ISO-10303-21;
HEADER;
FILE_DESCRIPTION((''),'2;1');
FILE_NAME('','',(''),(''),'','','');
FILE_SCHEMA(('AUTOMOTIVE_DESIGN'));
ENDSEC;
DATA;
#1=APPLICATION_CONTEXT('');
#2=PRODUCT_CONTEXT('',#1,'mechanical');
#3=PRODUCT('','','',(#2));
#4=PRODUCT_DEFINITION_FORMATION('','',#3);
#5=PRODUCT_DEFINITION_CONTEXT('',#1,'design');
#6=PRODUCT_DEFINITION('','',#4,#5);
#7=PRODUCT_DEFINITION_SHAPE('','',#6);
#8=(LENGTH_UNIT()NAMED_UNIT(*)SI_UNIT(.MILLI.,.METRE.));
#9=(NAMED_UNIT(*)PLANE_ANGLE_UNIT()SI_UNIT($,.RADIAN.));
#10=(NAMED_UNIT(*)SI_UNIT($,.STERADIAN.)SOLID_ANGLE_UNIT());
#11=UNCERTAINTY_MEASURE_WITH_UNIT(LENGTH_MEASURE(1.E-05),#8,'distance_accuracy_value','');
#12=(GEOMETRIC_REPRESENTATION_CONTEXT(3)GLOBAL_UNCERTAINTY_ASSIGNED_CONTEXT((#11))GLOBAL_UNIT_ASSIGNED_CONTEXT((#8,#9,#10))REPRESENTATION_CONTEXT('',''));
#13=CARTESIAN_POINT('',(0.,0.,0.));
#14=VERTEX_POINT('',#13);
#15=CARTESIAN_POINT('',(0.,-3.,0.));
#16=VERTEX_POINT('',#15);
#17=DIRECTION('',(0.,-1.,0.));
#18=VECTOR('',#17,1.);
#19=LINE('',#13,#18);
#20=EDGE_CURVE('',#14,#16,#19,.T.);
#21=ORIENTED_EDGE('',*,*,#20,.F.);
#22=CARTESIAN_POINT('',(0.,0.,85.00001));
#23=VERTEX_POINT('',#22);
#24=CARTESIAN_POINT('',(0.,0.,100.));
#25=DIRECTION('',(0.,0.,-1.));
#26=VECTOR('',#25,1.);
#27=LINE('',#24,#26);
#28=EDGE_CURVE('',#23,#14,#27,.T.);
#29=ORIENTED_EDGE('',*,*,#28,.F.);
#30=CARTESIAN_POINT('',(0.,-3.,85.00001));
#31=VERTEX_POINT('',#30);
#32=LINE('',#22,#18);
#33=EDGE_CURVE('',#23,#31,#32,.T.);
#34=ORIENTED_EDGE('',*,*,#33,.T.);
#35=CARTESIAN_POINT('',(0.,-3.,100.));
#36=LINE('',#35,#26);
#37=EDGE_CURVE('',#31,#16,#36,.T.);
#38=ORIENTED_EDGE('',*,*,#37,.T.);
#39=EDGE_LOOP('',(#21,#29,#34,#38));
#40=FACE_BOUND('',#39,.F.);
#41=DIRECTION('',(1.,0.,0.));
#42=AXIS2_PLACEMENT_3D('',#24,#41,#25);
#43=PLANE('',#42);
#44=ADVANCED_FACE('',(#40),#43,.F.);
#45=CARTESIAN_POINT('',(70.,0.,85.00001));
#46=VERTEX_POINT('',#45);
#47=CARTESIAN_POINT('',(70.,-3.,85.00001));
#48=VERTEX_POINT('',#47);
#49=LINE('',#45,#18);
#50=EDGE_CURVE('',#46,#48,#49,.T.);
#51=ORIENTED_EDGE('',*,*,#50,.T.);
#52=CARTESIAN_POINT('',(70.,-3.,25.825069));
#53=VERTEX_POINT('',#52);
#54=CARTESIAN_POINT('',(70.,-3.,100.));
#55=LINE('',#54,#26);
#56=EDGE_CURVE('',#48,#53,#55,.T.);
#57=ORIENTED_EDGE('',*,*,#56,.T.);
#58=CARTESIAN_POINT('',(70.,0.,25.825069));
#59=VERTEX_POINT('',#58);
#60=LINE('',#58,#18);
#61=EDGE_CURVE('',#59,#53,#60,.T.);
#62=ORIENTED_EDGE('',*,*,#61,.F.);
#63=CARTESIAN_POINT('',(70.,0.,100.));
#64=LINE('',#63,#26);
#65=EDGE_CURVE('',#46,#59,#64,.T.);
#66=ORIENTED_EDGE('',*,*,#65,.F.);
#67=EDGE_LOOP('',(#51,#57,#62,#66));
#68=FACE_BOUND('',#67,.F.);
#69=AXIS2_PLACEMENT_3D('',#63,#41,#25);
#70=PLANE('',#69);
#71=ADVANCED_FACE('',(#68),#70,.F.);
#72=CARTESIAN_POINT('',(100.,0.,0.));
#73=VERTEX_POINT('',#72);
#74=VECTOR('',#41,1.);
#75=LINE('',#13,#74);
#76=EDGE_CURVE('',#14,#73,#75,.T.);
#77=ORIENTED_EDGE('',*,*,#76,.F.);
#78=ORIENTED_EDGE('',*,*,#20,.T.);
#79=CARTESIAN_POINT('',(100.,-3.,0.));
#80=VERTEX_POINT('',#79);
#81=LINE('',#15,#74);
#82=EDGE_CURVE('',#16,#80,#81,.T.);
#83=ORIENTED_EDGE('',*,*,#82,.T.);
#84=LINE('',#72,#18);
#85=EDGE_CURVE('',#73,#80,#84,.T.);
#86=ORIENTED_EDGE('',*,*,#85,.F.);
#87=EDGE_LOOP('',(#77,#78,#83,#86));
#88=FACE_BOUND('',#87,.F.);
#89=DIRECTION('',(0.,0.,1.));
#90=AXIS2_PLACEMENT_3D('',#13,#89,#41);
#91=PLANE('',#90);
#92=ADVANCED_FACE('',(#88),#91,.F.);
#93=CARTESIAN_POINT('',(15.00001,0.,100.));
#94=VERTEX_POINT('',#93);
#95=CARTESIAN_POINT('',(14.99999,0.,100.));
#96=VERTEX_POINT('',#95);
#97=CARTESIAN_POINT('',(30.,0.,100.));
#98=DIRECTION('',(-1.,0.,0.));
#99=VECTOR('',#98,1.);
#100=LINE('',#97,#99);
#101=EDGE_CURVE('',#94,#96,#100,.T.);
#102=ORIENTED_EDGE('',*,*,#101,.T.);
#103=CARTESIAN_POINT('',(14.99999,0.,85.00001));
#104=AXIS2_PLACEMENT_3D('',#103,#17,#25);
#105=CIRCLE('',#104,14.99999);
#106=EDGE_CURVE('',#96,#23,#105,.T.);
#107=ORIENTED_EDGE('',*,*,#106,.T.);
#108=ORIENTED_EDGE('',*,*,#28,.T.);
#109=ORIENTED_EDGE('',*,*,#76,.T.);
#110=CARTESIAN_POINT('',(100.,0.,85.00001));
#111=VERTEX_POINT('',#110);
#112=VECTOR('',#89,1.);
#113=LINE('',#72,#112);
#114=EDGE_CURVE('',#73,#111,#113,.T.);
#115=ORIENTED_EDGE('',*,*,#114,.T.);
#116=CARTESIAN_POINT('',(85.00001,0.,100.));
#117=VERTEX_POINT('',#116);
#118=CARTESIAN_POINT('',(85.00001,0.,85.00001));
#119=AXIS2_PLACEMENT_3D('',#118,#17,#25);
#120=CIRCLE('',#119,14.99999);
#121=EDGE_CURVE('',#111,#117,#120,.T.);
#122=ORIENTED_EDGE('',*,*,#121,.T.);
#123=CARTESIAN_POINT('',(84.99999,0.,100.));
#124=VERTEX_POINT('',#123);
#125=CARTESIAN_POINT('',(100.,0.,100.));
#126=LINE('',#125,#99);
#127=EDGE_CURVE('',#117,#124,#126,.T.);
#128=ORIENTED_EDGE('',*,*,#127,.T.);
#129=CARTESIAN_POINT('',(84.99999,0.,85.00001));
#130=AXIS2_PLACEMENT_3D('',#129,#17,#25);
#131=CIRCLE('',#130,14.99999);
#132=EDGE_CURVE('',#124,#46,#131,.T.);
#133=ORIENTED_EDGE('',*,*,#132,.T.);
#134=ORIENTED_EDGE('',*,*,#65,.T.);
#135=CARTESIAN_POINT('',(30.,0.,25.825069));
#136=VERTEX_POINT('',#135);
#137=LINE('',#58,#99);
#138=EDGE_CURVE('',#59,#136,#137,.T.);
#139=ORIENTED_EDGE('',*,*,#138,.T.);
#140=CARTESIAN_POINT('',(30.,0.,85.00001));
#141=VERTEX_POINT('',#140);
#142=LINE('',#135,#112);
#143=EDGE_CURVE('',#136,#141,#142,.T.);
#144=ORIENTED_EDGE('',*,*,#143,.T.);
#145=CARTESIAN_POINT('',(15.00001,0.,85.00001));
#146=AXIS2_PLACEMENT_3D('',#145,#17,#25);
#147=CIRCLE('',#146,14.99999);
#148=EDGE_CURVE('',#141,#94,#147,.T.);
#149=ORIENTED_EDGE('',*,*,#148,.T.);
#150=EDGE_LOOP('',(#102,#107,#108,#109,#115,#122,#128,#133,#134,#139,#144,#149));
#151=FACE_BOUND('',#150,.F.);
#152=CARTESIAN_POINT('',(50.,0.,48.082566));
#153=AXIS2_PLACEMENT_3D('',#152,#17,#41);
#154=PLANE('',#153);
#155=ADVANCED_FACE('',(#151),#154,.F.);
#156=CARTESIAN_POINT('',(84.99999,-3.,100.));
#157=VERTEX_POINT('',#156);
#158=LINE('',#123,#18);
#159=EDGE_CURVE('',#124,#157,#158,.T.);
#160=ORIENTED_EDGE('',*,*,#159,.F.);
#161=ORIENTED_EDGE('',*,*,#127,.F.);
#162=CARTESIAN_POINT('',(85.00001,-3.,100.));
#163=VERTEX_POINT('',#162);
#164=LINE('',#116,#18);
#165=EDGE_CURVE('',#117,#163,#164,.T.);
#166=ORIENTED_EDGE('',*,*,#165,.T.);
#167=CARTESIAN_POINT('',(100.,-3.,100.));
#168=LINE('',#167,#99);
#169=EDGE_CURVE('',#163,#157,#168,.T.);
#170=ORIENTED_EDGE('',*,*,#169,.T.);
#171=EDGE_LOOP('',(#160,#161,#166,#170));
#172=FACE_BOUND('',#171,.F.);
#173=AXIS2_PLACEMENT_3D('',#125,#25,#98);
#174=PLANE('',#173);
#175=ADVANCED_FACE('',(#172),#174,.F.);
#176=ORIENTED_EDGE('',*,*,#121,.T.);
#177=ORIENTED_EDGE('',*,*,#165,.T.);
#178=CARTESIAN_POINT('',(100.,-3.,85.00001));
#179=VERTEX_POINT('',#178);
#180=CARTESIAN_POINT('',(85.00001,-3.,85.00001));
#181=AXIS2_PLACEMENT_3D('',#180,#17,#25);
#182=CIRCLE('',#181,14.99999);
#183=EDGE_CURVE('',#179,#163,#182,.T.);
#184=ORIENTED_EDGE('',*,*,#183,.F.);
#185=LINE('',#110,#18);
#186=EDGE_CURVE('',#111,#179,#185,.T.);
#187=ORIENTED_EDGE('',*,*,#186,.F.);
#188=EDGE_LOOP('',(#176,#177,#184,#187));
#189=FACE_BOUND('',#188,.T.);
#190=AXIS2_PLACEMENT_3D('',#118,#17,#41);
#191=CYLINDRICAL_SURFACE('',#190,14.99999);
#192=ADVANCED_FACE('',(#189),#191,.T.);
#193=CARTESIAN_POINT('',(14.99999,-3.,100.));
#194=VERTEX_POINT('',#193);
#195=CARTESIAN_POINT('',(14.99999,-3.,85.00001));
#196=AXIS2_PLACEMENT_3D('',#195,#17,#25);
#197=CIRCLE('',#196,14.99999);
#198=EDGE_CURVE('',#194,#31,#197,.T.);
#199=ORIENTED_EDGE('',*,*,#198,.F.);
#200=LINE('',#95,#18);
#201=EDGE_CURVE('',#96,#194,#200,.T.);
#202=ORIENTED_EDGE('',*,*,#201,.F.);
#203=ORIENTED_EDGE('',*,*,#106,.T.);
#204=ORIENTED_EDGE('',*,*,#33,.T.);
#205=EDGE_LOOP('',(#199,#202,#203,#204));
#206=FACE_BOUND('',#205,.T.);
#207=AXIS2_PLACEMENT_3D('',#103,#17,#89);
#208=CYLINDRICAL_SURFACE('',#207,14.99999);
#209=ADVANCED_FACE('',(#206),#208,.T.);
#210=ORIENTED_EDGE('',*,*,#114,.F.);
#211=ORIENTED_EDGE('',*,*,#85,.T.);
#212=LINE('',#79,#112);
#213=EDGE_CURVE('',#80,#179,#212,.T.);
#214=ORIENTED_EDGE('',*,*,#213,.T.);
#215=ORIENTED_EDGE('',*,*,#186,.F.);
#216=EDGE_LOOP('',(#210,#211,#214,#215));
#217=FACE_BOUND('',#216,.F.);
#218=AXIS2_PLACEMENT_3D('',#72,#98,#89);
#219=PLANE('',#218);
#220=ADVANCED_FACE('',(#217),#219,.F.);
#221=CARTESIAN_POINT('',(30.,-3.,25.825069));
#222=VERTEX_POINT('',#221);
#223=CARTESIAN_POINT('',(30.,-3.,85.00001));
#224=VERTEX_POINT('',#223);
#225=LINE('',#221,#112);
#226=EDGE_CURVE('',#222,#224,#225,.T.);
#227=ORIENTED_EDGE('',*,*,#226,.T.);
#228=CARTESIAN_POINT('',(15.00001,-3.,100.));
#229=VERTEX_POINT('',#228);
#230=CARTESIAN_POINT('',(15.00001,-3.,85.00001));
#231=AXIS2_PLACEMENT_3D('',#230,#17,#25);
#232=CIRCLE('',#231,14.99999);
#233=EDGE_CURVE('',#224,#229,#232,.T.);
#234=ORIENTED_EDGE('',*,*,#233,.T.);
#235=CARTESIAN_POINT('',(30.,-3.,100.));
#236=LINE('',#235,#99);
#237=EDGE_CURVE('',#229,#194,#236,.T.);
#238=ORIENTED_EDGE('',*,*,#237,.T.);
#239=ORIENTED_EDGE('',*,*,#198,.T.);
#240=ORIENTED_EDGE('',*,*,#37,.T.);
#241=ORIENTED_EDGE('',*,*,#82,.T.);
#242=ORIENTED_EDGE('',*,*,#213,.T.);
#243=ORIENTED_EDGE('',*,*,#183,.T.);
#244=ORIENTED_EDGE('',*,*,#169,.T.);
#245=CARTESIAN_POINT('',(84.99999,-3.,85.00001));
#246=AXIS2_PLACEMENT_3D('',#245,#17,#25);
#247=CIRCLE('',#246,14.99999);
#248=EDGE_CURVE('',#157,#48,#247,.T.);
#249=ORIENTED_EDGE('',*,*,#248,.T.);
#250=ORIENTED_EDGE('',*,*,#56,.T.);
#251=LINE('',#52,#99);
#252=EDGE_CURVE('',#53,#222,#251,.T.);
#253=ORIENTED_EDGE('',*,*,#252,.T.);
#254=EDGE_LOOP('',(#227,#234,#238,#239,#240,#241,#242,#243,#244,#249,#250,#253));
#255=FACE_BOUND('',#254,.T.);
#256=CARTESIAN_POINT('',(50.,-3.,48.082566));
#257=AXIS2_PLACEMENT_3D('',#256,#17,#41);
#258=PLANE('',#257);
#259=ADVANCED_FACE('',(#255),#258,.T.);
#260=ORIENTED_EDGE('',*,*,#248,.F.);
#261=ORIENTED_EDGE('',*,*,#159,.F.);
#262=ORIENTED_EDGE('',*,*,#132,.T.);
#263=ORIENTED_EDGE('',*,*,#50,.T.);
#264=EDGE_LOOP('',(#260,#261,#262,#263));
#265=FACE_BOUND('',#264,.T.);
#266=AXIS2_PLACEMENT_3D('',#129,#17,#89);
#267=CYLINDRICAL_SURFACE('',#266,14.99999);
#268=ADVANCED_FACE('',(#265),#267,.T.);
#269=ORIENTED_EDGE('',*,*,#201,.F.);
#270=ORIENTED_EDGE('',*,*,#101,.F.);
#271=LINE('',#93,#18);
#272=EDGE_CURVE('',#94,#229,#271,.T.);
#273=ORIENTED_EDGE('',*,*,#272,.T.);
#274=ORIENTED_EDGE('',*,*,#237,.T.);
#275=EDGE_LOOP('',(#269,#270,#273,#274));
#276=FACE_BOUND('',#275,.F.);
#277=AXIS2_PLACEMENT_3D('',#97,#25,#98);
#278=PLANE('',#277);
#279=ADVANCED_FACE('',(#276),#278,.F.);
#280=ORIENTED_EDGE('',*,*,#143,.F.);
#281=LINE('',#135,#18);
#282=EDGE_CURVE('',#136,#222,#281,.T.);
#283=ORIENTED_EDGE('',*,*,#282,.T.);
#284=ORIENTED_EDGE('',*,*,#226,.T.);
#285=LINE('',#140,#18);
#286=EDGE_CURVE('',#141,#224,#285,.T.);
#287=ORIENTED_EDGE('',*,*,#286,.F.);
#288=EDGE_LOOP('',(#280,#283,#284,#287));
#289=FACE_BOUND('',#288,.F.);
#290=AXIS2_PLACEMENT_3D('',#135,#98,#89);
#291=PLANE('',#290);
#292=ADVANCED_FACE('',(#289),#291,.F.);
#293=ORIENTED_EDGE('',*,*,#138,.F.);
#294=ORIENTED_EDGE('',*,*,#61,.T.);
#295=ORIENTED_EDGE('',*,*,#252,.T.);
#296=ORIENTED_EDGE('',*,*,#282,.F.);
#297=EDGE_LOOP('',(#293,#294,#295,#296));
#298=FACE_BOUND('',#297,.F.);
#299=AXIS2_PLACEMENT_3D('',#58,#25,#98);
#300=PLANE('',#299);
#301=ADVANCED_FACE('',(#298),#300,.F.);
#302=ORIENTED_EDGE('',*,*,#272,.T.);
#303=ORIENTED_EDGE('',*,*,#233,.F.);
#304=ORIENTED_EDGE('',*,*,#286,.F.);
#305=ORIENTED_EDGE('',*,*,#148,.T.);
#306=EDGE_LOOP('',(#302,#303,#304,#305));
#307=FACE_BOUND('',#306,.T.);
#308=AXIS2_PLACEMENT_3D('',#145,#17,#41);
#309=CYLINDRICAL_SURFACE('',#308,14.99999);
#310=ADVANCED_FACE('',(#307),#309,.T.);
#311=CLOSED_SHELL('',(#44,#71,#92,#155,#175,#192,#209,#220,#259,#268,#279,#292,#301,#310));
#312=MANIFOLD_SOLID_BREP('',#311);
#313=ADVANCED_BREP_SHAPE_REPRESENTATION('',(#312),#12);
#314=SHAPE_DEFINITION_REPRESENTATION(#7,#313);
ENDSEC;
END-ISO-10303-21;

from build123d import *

# Parameters (mm, degrees)
F1_DEPTH = 3
F2_R     = 14.99999


# Not quite as in the source:
# - a fillet or chamfer is up to 0.001 mm smaller than in the source, because OpenCascade refuses the exact size


with BuildPart() as f1:
    # F0 (on Front) → F1 (new body)
    with BuildSketch(Plane.XZ):
        Polygon((0, 25.8250685402), (0, 0), (100, 0), (100, 25.8250685402), (100, 100), (70, 100), (70, 25.8250685402), (30, 25.8250685402), (30, 100), (0, 100), align=None)
    extrude(amount=F1_DEPTH)

    # F2 (radius 15 in the source; OpenCascade refuses exactly that, so slightly less here)
    f2_edges = [f1.edges().sort_by_distance(p)[0] for p in [
        (100, -1.5, 100),
        (70, -1.5, 100),
        (30, -1.5, 100),
        (0, -1.5, 100),
    ]]
    fillet(f2_edges, radius=F2_R)


solid = f1.part
